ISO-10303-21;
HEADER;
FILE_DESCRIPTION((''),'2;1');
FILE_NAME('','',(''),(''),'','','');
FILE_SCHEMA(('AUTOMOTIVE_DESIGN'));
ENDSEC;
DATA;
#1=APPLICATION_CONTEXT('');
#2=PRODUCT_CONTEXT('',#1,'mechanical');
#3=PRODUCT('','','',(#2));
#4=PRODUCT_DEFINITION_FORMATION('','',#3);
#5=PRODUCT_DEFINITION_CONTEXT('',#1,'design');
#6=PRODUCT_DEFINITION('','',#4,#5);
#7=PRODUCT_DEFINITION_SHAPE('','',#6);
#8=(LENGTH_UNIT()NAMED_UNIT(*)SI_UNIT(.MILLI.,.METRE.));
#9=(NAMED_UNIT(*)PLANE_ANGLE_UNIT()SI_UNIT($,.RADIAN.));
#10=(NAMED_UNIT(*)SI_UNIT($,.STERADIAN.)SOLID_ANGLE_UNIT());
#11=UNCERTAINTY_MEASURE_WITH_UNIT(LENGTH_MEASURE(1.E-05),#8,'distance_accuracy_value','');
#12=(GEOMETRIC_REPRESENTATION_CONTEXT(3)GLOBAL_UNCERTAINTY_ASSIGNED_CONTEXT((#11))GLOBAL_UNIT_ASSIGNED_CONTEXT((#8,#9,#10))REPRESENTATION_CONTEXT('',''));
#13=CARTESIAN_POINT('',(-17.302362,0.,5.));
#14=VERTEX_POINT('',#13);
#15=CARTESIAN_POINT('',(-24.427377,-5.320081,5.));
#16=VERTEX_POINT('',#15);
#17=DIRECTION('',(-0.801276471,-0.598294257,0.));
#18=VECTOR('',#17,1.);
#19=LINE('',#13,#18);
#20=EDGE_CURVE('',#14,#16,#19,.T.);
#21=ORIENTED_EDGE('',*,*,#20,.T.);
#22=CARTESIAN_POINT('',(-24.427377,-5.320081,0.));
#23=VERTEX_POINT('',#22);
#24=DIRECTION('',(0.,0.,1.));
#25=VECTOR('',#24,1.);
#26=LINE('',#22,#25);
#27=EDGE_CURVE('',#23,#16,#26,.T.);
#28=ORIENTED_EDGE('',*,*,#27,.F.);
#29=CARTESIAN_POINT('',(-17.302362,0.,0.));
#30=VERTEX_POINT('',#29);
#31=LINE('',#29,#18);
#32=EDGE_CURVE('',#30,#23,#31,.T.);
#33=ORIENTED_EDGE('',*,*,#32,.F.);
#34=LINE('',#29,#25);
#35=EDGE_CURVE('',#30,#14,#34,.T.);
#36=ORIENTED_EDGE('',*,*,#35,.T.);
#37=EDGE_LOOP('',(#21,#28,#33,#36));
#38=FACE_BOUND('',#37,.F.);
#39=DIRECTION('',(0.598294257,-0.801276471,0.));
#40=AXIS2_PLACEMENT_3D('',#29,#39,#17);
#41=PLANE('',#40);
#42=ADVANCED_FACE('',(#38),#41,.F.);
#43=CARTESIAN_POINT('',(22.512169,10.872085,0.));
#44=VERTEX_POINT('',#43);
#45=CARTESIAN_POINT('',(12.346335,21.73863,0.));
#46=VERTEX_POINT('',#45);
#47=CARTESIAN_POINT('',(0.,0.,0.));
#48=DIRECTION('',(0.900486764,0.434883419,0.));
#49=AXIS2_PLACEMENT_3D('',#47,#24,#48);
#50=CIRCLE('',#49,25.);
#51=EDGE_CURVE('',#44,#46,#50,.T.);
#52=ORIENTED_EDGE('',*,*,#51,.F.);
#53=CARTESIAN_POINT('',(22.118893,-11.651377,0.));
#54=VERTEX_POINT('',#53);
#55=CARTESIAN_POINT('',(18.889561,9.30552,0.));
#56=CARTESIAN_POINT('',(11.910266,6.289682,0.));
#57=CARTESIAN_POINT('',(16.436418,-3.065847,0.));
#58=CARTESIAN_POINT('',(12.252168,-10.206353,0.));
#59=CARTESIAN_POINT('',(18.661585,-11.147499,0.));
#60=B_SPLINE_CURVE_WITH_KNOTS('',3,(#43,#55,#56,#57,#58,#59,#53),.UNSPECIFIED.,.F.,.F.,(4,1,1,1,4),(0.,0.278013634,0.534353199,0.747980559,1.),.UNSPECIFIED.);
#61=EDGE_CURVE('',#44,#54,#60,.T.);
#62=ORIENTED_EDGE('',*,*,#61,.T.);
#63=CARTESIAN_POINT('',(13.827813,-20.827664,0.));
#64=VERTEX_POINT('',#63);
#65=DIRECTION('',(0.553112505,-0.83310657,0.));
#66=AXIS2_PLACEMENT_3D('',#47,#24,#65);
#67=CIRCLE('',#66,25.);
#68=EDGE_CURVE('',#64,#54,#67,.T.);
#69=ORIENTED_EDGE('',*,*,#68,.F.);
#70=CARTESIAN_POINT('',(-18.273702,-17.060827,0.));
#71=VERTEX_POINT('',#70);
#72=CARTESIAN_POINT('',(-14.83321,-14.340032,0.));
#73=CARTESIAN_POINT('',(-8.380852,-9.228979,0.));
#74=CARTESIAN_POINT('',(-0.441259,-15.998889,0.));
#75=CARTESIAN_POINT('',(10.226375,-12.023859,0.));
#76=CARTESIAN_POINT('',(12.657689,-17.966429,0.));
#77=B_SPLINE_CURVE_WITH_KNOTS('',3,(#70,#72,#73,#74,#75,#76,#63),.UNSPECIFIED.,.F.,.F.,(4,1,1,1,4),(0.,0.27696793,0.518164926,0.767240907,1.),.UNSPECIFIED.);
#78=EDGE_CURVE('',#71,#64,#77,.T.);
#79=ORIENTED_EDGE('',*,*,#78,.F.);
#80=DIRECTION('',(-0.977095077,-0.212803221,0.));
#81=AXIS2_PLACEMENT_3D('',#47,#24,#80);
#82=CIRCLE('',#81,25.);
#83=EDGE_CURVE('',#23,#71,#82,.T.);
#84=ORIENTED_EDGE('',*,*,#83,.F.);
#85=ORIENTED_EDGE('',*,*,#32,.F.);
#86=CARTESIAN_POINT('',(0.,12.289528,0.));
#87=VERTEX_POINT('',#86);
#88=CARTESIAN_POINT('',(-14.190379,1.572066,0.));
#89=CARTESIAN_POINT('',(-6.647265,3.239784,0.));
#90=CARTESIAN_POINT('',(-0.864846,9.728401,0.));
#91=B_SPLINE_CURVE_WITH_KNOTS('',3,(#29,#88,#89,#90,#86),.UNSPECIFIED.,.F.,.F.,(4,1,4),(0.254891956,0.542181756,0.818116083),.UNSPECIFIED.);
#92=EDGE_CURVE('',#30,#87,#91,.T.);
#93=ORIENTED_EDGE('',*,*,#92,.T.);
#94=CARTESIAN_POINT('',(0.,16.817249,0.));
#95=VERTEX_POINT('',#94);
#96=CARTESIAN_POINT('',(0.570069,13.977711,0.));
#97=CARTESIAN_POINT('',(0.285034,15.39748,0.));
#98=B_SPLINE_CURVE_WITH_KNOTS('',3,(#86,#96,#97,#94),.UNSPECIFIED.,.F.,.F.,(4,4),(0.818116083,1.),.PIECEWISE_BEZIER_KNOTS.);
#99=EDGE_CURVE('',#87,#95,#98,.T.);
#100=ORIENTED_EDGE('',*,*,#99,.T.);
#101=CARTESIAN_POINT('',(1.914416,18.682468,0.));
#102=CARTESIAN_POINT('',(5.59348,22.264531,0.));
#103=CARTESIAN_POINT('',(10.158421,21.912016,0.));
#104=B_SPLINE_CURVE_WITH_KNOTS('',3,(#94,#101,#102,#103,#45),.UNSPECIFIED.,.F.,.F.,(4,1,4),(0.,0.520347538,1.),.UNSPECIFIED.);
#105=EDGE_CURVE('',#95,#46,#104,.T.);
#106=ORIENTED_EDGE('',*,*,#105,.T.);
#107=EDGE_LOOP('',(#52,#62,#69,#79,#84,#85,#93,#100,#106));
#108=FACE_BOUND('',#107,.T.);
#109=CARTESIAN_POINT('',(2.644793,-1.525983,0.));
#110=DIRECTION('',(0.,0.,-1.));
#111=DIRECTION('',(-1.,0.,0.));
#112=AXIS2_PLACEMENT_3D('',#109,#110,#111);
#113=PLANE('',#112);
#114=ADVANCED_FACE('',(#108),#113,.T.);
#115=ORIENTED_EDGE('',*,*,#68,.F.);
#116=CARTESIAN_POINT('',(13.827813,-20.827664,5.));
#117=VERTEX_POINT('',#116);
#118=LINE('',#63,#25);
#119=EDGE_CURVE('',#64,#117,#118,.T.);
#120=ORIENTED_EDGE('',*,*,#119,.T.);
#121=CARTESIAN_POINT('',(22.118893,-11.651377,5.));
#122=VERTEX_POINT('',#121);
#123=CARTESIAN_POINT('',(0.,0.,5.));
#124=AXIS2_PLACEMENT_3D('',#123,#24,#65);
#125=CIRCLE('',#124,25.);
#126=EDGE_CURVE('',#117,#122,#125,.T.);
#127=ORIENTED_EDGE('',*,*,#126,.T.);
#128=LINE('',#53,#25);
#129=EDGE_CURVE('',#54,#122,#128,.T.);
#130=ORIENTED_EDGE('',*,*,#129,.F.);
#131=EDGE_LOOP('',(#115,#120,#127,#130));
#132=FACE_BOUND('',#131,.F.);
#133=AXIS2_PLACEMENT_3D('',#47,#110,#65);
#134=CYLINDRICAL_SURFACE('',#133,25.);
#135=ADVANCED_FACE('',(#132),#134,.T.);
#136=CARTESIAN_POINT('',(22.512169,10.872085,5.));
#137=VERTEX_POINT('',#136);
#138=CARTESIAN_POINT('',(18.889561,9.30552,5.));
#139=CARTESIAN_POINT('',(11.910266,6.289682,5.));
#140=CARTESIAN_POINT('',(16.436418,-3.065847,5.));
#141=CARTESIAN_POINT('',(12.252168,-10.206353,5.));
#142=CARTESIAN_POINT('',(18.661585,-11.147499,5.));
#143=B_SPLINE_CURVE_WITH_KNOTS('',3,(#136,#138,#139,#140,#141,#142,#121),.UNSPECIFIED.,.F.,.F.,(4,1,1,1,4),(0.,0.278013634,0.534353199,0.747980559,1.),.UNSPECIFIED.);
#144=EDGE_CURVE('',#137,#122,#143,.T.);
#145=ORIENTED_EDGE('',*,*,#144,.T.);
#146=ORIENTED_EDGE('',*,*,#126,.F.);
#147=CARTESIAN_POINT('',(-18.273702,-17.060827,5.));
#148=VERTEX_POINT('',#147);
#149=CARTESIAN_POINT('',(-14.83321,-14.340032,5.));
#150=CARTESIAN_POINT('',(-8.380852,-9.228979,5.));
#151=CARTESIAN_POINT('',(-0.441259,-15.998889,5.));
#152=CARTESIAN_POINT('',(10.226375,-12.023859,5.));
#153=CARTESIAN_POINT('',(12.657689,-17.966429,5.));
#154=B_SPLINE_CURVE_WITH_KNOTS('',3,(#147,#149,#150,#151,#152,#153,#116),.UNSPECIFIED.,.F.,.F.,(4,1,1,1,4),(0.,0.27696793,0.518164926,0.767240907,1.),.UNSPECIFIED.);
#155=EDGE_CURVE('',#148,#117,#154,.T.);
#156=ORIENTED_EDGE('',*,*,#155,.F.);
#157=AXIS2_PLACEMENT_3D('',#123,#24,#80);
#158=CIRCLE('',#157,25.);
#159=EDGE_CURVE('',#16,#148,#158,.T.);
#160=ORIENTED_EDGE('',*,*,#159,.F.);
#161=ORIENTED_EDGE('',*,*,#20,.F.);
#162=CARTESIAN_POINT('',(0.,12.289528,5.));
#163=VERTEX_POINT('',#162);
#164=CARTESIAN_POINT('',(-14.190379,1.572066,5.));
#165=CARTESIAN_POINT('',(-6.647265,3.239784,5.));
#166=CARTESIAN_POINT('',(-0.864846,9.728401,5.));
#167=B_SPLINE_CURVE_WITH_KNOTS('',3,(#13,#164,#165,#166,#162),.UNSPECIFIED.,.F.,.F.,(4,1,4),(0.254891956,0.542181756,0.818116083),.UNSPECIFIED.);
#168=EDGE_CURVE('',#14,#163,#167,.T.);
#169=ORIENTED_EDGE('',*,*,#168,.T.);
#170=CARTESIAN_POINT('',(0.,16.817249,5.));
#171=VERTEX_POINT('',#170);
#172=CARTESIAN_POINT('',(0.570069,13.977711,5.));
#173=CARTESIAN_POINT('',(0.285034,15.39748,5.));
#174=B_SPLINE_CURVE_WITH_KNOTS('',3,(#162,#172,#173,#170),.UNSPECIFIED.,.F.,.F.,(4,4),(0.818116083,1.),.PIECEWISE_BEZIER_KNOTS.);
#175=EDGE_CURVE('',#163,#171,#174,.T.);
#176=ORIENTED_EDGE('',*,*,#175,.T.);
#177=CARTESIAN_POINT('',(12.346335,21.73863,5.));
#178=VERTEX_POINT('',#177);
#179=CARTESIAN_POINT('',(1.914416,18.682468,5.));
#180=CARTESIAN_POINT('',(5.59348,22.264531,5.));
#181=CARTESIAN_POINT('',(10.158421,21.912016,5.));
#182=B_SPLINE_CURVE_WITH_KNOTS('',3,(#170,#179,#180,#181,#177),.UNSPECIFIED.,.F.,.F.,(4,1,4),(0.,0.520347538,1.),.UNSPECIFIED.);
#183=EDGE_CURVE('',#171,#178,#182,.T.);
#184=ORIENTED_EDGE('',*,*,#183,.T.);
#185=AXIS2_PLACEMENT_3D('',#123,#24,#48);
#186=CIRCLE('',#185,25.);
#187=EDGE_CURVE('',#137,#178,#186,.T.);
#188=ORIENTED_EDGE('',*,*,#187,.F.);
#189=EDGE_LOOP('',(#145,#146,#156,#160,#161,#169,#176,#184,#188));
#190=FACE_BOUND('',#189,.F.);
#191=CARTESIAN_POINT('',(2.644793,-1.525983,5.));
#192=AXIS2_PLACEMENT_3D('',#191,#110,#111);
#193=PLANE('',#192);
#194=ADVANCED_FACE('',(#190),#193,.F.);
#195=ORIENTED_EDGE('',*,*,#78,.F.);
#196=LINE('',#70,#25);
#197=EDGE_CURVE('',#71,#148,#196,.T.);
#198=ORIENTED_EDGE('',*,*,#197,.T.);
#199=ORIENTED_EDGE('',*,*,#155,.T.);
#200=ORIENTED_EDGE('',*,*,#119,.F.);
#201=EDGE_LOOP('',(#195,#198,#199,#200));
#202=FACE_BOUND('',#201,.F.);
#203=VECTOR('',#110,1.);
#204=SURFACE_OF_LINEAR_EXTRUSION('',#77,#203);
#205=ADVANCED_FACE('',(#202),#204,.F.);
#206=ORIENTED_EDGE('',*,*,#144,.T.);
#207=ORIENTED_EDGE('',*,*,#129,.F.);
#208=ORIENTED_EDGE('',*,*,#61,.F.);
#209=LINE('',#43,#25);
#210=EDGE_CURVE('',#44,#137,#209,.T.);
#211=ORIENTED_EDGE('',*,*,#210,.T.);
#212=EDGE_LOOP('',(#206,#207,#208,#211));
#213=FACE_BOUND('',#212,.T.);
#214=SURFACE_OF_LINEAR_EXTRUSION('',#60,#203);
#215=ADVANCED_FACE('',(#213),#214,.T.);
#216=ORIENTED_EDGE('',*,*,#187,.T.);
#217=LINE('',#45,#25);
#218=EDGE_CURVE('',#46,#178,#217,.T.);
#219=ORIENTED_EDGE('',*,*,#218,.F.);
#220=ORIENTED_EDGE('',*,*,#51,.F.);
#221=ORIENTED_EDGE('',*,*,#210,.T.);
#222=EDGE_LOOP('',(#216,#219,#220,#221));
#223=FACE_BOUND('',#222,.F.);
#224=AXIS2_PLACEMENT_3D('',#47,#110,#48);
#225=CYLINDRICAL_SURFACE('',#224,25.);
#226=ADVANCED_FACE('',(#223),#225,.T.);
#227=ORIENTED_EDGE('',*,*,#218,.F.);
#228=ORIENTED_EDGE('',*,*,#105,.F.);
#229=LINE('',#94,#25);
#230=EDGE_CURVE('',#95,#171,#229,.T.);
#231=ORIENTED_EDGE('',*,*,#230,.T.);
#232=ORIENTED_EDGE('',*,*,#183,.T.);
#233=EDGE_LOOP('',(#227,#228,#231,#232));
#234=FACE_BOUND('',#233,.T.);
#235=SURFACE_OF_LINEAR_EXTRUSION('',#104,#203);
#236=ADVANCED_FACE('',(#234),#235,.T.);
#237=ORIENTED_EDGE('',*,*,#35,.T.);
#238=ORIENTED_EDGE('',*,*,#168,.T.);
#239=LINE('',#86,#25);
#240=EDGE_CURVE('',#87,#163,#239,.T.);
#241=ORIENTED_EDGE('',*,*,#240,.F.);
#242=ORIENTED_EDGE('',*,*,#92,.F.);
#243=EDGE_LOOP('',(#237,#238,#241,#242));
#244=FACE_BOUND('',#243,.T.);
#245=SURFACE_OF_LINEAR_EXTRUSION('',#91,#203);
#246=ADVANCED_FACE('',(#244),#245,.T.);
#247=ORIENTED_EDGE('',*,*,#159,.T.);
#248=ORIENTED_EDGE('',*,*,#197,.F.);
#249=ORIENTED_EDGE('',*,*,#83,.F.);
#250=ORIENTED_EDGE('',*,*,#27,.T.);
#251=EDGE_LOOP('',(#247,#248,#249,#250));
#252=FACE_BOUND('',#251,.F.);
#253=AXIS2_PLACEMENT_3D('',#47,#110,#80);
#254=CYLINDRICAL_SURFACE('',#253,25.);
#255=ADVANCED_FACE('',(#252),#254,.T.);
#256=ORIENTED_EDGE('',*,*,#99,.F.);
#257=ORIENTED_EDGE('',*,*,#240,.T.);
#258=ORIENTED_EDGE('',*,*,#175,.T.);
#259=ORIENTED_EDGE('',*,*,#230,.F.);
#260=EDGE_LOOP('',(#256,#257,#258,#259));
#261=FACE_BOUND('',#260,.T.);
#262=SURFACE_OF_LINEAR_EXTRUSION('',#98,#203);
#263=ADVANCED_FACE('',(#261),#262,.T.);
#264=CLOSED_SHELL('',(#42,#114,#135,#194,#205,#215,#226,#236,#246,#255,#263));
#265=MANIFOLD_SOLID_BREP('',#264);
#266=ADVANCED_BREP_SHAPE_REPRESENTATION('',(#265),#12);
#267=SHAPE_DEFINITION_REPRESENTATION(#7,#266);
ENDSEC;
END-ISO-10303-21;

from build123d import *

# Parameters (mm, degrees)
F1_DEPTH = 5


with BuildPart() as f1:
    # F0 (on Top) → F1 (new body)
    with BuildSketch(Plane.XY):
        with BuildLine():
            add(Edge.make_bspline(
                [(22.5121691, 10.8720854676), (18.8895611428, 9.3055197167), (11.9102659407, 6.2896821538), (16.4364178682, -3.0658471403), (12.2521680449, -10.2063529762), (18.6615851191, -11.1474987265), (22.1188925873, -11.6513772023)],
                knots=[0, 0, 0, 0, 0.2780136343, 0.5343531988, 0.7479805585, 1, 1, 1, 1], degree=3))
            ThreePointArc((22.5121691, 10.8720854676), (18.2564856156, 17.0792486067), (12.34633467, 21.7386296766))
            add(Edge.make_bspline(
                [(0, 16.8172493577), (1.9144161531, 18.6824676113), (5.5934798745, 22.2645311542), (10.1584208321, 21.9120162799), (12.34633467, 21.7386296766)],
                knots=[0, 0, 0, 0, 0.5203475383, 1, 1, 1, 1], degree=3))
            add(Edge.make_bspline(
                [(0, 12.2895278037), (0.5700685894, 13.9777110398), (0.2850342947, 15.3974801988), (0, 16.8172493577)],
                knots=[0.8181160828, 0.8181160828, 0.8181160828, 0.8181160828, 1, 1, 1, 1], degree=3))
            add(Edge.make_bspline(
                [(-17.3023622483, 0), (-14.1903788127, 1.5720662607), (-6.6472654424, 3.2397841474), (-0.8648455283, 9.7284013886), (0, 12.2895278037)],
                knots=[0.254891956, 0.254891956, 0.254891956, 0.254891956, 0.542181756, 0.8181160828, 0.8181160828, 0.8181160828, 0.8181160828], degree=3))
            Line((-17.3023622483, 0), (-24.4273769181, -5.3200805351))
            ThreePointArc((-24.4273769181, -5.3200805351), (-22.1428727527, -11.6057393672), (-18.2737018092, -17.0608271249))
            add(Edge.make_bspline(
                [(-18.2737018092, -17.0608271249), (-14.8332101277, -14.3400323801), (-8.3808524987, -9.228978734), (-0.4412585546, -15.998889193), (10.2263751779, -12.0238586347), (12.6576888155, -17.9664290501), (13.8278126154, -20.8276642539)],
                knots=[0, 0, 0, 0, 0.2769679297, 0.5181649262, 0.767240907, 1, 1, 1, 1], degree=3))
            ThreePointArc((13.8278126154, -20.8276642539), (18.549729506, -16.7602963951), (22.1188925873, -11.6513772023))
        make_face()
    extrude(amount=F1_DEPTH)


solid = f1.part
